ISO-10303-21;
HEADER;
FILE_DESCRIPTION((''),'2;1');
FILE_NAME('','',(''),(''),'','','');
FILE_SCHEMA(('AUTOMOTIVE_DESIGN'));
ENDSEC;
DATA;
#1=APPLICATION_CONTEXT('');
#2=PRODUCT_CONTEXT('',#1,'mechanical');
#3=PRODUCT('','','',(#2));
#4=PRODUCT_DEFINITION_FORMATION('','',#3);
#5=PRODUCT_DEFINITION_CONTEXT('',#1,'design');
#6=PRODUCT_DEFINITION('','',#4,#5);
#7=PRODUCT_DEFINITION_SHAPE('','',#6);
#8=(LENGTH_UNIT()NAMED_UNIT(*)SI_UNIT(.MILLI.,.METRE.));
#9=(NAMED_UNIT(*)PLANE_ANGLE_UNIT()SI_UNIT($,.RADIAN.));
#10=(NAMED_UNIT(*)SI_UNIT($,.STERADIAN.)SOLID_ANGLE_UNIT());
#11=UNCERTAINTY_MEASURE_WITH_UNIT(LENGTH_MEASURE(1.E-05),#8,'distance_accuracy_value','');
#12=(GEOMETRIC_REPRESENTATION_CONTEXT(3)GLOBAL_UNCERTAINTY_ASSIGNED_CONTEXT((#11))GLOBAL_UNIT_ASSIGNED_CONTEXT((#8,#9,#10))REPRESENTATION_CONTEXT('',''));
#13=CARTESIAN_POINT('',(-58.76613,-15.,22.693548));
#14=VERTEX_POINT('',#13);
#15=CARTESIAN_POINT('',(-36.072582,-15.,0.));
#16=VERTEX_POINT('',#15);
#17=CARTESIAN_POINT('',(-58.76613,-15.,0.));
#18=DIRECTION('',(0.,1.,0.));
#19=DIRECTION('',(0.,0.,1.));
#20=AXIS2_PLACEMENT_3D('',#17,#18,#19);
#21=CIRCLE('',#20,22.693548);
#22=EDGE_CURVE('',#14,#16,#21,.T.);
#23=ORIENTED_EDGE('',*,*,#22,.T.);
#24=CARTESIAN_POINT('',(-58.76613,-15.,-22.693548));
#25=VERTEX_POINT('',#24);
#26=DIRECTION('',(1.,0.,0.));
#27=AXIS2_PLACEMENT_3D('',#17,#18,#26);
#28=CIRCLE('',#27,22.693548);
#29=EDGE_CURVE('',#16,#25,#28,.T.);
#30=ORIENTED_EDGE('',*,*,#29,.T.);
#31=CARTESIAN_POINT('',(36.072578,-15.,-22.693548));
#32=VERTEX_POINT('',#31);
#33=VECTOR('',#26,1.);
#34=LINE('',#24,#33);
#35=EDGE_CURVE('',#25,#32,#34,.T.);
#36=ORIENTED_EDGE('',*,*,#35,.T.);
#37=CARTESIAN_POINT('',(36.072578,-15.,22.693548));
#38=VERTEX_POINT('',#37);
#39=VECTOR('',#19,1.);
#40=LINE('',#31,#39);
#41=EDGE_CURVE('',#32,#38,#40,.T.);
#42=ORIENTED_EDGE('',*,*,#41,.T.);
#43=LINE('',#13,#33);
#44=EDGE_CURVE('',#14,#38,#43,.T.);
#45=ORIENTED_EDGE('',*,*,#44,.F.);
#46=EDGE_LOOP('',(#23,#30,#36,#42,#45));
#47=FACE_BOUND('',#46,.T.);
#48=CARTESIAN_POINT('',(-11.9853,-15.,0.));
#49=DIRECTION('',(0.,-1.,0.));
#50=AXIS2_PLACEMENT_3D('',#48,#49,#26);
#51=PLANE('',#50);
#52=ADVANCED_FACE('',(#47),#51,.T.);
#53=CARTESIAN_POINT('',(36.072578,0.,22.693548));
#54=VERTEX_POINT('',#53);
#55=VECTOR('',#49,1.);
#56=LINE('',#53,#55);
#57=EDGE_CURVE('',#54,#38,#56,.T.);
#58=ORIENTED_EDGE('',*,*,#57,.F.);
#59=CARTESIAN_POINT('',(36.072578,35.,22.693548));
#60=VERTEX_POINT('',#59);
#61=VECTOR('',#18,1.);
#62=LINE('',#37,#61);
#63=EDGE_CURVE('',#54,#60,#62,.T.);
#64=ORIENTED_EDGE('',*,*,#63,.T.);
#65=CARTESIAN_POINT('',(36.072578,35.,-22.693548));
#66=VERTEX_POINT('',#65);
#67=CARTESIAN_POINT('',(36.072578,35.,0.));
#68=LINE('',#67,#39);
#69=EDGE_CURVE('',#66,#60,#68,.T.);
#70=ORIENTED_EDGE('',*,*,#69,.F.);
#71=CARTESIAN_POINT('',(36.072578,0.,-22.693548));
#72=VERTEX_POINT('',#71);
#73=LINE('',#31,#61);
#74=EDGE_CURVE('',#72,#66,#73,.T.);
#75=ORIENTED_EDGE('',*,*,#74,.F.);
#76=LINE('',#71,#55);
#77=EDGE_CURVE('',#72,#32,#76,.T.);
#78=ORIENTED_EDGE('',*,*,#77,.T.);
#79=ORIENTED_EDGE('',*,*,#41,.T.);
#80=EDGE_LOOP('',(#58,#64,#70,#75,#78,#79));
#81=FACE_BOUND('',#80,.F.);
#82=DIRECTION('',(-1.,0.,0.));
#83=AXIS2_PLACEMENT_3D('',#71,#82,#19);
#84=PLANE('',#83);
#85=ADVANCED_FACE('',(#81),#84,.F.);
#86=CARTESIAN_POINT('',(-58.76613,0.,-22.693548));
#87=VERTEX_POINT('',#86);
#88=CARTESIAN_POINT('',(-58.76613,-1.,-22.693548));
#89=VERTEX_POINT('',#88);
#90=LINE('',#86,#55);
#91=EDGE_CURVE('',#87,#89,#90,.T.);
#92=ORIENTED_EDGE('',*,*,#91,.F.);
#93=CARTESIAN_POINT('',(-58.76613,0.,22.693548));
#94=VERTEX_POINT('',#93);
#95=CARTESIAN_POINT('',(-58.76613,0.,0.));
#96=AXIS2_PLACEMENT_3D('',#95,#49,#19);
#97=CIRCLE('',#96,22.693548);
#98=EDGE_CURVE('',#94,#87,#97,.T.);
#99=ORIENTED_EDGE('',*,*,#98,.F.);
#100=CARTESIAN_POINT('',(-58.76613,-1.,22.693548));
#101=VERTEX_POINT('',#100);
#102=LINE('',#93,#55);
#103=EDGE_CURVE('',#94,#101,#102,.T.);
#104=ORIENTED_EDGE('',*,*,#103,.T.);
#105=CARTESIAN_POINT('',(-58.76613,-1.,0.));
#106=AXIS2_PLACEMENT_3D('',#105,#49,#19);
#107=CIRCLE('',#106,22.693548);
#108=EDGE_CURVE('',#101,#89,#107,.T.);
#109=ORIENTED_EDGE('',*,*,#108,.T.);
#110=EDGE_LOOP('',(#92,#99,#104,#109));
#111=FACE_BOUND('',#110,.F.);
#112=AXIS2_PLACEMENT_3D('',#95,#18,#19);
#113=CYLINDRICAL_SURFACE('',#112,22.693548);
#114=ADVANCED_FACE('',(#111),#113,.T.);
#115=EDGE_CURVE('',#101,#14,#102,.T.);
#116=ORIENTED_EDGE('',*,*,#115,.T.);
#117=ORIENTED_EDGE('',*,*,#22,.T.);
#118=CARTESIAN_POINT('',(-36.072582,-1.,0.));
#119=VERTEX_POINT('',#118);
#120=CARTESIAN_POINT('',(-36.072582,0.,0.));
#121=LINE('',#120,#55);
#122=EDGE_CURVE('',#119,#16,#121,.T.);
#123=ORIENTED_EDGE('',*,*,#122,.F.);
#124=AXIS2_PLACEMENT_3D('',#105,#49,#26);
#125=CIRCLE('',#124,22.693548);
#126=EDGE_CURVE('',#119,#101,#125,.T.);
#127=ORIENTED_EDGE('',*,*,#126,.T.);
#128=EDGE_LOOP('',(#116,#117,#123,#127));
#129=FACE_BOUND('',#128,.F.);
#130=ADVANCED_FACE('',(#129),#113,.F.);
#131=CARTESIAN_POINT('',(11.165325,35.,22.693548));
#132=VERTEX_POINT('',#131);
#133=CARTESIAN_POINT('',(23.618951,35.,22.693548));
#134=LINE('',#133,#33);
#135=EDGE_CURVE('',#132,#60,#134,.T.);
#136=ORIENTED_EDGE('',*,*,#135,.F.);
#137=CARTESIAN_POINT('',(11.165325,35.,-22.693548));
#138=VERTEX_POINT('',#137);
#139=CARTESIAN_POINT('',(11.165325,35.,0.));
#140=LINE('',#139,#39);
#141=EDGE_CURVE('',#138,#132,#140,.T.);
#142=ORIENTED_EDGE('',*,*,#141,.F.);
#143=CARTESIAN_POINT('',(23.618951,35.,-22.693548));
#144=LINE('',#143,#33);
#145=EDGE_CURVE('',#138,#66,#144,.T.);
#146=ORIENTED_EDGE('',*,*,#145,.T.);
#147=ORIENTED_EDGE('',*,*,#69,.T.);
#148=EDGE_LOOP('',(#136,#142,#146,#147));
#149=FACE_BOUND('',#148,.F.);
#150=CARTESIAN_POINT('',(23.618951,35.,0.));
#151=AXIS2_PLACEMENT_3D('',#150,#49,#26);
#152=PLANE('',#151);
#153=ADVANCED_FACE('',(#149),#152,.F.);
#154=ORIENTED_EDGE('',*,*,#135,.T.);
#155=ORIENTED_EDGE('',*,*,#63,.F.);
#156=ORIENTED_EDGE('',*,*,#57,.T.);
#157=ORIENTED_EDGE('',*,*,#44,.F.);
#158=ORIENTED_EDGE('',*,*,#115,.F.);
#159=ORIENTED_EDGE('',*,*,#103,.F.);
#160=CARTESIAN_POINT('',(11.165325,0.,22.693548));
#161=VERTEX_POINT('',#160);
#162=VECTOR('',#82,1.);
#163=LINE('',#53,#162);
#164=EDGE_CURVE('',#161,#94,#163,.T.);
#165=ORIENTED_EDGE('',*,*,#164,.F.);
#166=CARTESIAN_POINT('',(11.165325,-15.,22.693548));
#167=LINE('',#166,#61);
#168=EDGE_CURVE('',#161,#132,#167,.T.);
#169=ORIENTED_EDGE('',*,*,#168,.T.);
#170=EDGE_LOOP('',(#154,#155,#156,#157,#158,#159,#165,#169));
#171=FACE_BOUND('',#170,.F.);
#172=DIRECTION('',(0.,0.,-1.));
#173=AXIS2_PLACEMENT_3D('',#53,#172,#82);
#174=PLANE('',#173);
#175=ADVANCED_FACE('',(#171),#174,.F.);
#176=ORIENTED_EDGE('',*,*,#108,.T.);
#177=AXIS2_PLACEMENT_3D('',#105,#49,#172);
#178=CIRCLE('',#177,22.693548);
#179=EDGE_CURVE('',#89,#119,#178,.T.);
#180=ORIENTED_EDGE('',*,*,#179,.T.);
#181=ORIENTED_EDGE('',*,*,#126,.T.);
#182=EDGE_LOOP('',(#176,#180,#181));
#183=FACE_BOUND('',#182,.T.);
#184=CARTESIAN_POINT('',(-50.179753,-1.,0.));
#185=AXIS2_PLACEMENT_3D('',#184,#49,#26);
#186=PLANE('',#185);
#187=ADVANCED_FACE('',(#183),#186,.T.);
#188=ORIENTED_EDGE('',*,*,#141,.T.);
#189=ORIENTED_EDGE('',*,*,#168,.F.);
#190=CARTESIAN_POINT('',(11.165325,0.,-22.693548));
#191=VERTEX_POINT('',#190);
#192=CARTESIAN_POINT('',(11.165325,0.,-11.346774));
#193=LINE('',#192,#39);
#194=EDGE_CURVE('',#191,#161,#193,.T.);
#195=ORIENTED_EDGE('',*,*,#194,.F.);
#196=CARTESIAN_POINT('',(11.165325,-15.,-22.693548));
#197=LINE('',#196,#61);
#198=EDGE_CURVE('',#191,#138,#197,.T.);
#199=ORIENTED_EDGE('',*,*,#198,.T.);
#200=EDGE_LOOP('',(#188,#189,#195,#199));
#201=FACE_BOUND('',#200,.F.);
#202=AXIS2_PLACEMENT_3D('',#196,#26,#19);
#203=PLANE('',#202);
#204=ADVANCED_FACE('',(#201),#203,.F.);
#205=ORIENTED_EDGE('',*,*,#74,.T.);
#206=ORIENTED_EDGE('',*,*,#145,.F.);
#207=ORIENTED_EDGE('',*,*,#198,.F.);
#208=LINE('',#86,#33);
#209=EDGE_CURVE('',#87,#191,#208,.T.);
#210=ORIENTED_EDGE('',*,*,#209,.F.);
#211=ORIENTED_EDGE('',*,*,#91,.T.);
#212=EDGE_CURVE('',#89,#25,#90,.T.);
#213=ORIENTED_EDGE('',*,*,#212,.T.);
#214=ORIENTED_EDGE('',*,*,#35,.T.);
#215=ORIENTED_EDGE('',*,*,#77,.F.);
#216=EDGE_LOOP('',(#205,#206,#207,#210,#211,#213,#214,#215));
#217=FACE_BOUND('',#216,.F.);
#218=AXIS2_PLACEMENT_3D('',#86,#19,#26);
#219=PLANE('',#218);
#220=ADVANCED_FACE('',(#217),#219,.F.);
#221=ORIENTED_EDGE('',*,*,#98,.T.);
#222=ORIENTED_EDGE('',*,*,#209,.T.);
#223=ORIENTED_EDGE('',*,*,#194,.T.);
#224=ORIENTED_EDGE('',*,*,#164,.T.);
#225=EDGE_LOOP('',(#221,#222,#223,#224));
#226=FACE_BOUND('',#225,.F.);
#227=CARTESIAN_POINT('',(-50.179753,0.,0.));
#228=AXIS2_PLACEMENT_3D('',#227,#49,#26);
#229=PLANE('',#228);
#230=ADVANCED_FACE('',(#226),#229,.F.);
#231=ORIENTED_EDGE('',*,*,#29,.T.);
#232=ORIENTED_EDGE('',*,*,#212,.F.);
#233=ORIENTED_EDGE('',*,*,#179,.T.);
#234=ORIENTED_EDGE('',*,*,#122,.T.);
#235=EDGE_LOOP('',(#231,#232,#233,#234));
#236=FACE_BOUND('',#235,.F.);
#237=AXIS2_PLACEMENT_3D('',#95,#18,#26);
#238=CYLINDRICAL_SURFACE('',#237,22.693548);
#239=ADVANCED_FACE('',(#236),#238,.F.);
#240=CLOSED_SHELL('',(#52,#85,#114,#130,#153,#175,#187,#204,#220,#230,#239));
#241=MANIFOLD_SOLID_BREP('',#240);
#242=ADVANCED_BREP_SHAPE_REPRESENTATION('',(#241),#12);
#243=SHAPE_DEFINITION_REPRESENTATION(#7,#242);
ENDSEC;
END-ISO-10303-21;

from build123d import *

# Parameters (mm, degrees)
F2_DEPTH = 15
F3_W     = 24.9072536826
F3_H     = 45.3870967031
F4_DEPTH = 50
F5_DEPTH = 1


# Not quite as in the source:
# - the program builds the solid bodies; features that only make, move or delete a surface that nothing else refers to are left out


with BuildPart() as f2:
    # F0 (on Front) → F2 (new body)
    with BuildSketch(Plane.XZ):
        with BuildLine():
            ThreePointArc((-58.766130358, 22.6935483515), (-42.7193684294, 16.0467619285), (-36.0725820065, 0))
            ThreePointArc((-36.0725820065, 0), (-42.7193684294, -16.0467619285), (-58.766130358, -22.6935483515))
            Line((-58.766130358, -22.6935483515), (36.0725782812, -22.6935483515))
            Line((36.0725782812, -22.6935483515), (36.0725782812, 22.6935483515))
            Line((36.0725782812, 22.6935483515), (-58.766130358, 22.6935483515))
        make_face()
    extrude(amount=F2_DEPTH)

    # F3 (on face) → F4 (join)
    with BuildSketch(Plane.XZ.offset(15)):
        with Locations((23.6189514399, 0)):
            Rectangle(F3_W, F3_H)
    extrude(amount=-F4_DEPTH)

    # F0 (on Front) → F5 (join)
    with BuildSketch(Plane.XZ):
        with BuildLine():
            ThreePointArc((-58.766130358, -22.6935483515), (-42.7193684294, -16.0467619285), (-36.0725820065, 0))
            ThreePointArc((-36.0725820065, 0), (-42.7193684294, 16.0467619285), (-58.766130358, 22.6935483515))
            Line((-58.766130358, 22.6935483515), (-58.766130358, -22.6935483515))
        make_face()
        with BuildLine():
            Line((-58.766130358, -22.6935483515), (-58.766130358, 22.6935483515))
            ThreePointArc((-58.766130358, 22.6935483515), (-81.4596787095, 0), (-58.766130358, -22.6935483515))
        make_face()
    extrude(amount=F5_DEPTH)


solid = f2.part
